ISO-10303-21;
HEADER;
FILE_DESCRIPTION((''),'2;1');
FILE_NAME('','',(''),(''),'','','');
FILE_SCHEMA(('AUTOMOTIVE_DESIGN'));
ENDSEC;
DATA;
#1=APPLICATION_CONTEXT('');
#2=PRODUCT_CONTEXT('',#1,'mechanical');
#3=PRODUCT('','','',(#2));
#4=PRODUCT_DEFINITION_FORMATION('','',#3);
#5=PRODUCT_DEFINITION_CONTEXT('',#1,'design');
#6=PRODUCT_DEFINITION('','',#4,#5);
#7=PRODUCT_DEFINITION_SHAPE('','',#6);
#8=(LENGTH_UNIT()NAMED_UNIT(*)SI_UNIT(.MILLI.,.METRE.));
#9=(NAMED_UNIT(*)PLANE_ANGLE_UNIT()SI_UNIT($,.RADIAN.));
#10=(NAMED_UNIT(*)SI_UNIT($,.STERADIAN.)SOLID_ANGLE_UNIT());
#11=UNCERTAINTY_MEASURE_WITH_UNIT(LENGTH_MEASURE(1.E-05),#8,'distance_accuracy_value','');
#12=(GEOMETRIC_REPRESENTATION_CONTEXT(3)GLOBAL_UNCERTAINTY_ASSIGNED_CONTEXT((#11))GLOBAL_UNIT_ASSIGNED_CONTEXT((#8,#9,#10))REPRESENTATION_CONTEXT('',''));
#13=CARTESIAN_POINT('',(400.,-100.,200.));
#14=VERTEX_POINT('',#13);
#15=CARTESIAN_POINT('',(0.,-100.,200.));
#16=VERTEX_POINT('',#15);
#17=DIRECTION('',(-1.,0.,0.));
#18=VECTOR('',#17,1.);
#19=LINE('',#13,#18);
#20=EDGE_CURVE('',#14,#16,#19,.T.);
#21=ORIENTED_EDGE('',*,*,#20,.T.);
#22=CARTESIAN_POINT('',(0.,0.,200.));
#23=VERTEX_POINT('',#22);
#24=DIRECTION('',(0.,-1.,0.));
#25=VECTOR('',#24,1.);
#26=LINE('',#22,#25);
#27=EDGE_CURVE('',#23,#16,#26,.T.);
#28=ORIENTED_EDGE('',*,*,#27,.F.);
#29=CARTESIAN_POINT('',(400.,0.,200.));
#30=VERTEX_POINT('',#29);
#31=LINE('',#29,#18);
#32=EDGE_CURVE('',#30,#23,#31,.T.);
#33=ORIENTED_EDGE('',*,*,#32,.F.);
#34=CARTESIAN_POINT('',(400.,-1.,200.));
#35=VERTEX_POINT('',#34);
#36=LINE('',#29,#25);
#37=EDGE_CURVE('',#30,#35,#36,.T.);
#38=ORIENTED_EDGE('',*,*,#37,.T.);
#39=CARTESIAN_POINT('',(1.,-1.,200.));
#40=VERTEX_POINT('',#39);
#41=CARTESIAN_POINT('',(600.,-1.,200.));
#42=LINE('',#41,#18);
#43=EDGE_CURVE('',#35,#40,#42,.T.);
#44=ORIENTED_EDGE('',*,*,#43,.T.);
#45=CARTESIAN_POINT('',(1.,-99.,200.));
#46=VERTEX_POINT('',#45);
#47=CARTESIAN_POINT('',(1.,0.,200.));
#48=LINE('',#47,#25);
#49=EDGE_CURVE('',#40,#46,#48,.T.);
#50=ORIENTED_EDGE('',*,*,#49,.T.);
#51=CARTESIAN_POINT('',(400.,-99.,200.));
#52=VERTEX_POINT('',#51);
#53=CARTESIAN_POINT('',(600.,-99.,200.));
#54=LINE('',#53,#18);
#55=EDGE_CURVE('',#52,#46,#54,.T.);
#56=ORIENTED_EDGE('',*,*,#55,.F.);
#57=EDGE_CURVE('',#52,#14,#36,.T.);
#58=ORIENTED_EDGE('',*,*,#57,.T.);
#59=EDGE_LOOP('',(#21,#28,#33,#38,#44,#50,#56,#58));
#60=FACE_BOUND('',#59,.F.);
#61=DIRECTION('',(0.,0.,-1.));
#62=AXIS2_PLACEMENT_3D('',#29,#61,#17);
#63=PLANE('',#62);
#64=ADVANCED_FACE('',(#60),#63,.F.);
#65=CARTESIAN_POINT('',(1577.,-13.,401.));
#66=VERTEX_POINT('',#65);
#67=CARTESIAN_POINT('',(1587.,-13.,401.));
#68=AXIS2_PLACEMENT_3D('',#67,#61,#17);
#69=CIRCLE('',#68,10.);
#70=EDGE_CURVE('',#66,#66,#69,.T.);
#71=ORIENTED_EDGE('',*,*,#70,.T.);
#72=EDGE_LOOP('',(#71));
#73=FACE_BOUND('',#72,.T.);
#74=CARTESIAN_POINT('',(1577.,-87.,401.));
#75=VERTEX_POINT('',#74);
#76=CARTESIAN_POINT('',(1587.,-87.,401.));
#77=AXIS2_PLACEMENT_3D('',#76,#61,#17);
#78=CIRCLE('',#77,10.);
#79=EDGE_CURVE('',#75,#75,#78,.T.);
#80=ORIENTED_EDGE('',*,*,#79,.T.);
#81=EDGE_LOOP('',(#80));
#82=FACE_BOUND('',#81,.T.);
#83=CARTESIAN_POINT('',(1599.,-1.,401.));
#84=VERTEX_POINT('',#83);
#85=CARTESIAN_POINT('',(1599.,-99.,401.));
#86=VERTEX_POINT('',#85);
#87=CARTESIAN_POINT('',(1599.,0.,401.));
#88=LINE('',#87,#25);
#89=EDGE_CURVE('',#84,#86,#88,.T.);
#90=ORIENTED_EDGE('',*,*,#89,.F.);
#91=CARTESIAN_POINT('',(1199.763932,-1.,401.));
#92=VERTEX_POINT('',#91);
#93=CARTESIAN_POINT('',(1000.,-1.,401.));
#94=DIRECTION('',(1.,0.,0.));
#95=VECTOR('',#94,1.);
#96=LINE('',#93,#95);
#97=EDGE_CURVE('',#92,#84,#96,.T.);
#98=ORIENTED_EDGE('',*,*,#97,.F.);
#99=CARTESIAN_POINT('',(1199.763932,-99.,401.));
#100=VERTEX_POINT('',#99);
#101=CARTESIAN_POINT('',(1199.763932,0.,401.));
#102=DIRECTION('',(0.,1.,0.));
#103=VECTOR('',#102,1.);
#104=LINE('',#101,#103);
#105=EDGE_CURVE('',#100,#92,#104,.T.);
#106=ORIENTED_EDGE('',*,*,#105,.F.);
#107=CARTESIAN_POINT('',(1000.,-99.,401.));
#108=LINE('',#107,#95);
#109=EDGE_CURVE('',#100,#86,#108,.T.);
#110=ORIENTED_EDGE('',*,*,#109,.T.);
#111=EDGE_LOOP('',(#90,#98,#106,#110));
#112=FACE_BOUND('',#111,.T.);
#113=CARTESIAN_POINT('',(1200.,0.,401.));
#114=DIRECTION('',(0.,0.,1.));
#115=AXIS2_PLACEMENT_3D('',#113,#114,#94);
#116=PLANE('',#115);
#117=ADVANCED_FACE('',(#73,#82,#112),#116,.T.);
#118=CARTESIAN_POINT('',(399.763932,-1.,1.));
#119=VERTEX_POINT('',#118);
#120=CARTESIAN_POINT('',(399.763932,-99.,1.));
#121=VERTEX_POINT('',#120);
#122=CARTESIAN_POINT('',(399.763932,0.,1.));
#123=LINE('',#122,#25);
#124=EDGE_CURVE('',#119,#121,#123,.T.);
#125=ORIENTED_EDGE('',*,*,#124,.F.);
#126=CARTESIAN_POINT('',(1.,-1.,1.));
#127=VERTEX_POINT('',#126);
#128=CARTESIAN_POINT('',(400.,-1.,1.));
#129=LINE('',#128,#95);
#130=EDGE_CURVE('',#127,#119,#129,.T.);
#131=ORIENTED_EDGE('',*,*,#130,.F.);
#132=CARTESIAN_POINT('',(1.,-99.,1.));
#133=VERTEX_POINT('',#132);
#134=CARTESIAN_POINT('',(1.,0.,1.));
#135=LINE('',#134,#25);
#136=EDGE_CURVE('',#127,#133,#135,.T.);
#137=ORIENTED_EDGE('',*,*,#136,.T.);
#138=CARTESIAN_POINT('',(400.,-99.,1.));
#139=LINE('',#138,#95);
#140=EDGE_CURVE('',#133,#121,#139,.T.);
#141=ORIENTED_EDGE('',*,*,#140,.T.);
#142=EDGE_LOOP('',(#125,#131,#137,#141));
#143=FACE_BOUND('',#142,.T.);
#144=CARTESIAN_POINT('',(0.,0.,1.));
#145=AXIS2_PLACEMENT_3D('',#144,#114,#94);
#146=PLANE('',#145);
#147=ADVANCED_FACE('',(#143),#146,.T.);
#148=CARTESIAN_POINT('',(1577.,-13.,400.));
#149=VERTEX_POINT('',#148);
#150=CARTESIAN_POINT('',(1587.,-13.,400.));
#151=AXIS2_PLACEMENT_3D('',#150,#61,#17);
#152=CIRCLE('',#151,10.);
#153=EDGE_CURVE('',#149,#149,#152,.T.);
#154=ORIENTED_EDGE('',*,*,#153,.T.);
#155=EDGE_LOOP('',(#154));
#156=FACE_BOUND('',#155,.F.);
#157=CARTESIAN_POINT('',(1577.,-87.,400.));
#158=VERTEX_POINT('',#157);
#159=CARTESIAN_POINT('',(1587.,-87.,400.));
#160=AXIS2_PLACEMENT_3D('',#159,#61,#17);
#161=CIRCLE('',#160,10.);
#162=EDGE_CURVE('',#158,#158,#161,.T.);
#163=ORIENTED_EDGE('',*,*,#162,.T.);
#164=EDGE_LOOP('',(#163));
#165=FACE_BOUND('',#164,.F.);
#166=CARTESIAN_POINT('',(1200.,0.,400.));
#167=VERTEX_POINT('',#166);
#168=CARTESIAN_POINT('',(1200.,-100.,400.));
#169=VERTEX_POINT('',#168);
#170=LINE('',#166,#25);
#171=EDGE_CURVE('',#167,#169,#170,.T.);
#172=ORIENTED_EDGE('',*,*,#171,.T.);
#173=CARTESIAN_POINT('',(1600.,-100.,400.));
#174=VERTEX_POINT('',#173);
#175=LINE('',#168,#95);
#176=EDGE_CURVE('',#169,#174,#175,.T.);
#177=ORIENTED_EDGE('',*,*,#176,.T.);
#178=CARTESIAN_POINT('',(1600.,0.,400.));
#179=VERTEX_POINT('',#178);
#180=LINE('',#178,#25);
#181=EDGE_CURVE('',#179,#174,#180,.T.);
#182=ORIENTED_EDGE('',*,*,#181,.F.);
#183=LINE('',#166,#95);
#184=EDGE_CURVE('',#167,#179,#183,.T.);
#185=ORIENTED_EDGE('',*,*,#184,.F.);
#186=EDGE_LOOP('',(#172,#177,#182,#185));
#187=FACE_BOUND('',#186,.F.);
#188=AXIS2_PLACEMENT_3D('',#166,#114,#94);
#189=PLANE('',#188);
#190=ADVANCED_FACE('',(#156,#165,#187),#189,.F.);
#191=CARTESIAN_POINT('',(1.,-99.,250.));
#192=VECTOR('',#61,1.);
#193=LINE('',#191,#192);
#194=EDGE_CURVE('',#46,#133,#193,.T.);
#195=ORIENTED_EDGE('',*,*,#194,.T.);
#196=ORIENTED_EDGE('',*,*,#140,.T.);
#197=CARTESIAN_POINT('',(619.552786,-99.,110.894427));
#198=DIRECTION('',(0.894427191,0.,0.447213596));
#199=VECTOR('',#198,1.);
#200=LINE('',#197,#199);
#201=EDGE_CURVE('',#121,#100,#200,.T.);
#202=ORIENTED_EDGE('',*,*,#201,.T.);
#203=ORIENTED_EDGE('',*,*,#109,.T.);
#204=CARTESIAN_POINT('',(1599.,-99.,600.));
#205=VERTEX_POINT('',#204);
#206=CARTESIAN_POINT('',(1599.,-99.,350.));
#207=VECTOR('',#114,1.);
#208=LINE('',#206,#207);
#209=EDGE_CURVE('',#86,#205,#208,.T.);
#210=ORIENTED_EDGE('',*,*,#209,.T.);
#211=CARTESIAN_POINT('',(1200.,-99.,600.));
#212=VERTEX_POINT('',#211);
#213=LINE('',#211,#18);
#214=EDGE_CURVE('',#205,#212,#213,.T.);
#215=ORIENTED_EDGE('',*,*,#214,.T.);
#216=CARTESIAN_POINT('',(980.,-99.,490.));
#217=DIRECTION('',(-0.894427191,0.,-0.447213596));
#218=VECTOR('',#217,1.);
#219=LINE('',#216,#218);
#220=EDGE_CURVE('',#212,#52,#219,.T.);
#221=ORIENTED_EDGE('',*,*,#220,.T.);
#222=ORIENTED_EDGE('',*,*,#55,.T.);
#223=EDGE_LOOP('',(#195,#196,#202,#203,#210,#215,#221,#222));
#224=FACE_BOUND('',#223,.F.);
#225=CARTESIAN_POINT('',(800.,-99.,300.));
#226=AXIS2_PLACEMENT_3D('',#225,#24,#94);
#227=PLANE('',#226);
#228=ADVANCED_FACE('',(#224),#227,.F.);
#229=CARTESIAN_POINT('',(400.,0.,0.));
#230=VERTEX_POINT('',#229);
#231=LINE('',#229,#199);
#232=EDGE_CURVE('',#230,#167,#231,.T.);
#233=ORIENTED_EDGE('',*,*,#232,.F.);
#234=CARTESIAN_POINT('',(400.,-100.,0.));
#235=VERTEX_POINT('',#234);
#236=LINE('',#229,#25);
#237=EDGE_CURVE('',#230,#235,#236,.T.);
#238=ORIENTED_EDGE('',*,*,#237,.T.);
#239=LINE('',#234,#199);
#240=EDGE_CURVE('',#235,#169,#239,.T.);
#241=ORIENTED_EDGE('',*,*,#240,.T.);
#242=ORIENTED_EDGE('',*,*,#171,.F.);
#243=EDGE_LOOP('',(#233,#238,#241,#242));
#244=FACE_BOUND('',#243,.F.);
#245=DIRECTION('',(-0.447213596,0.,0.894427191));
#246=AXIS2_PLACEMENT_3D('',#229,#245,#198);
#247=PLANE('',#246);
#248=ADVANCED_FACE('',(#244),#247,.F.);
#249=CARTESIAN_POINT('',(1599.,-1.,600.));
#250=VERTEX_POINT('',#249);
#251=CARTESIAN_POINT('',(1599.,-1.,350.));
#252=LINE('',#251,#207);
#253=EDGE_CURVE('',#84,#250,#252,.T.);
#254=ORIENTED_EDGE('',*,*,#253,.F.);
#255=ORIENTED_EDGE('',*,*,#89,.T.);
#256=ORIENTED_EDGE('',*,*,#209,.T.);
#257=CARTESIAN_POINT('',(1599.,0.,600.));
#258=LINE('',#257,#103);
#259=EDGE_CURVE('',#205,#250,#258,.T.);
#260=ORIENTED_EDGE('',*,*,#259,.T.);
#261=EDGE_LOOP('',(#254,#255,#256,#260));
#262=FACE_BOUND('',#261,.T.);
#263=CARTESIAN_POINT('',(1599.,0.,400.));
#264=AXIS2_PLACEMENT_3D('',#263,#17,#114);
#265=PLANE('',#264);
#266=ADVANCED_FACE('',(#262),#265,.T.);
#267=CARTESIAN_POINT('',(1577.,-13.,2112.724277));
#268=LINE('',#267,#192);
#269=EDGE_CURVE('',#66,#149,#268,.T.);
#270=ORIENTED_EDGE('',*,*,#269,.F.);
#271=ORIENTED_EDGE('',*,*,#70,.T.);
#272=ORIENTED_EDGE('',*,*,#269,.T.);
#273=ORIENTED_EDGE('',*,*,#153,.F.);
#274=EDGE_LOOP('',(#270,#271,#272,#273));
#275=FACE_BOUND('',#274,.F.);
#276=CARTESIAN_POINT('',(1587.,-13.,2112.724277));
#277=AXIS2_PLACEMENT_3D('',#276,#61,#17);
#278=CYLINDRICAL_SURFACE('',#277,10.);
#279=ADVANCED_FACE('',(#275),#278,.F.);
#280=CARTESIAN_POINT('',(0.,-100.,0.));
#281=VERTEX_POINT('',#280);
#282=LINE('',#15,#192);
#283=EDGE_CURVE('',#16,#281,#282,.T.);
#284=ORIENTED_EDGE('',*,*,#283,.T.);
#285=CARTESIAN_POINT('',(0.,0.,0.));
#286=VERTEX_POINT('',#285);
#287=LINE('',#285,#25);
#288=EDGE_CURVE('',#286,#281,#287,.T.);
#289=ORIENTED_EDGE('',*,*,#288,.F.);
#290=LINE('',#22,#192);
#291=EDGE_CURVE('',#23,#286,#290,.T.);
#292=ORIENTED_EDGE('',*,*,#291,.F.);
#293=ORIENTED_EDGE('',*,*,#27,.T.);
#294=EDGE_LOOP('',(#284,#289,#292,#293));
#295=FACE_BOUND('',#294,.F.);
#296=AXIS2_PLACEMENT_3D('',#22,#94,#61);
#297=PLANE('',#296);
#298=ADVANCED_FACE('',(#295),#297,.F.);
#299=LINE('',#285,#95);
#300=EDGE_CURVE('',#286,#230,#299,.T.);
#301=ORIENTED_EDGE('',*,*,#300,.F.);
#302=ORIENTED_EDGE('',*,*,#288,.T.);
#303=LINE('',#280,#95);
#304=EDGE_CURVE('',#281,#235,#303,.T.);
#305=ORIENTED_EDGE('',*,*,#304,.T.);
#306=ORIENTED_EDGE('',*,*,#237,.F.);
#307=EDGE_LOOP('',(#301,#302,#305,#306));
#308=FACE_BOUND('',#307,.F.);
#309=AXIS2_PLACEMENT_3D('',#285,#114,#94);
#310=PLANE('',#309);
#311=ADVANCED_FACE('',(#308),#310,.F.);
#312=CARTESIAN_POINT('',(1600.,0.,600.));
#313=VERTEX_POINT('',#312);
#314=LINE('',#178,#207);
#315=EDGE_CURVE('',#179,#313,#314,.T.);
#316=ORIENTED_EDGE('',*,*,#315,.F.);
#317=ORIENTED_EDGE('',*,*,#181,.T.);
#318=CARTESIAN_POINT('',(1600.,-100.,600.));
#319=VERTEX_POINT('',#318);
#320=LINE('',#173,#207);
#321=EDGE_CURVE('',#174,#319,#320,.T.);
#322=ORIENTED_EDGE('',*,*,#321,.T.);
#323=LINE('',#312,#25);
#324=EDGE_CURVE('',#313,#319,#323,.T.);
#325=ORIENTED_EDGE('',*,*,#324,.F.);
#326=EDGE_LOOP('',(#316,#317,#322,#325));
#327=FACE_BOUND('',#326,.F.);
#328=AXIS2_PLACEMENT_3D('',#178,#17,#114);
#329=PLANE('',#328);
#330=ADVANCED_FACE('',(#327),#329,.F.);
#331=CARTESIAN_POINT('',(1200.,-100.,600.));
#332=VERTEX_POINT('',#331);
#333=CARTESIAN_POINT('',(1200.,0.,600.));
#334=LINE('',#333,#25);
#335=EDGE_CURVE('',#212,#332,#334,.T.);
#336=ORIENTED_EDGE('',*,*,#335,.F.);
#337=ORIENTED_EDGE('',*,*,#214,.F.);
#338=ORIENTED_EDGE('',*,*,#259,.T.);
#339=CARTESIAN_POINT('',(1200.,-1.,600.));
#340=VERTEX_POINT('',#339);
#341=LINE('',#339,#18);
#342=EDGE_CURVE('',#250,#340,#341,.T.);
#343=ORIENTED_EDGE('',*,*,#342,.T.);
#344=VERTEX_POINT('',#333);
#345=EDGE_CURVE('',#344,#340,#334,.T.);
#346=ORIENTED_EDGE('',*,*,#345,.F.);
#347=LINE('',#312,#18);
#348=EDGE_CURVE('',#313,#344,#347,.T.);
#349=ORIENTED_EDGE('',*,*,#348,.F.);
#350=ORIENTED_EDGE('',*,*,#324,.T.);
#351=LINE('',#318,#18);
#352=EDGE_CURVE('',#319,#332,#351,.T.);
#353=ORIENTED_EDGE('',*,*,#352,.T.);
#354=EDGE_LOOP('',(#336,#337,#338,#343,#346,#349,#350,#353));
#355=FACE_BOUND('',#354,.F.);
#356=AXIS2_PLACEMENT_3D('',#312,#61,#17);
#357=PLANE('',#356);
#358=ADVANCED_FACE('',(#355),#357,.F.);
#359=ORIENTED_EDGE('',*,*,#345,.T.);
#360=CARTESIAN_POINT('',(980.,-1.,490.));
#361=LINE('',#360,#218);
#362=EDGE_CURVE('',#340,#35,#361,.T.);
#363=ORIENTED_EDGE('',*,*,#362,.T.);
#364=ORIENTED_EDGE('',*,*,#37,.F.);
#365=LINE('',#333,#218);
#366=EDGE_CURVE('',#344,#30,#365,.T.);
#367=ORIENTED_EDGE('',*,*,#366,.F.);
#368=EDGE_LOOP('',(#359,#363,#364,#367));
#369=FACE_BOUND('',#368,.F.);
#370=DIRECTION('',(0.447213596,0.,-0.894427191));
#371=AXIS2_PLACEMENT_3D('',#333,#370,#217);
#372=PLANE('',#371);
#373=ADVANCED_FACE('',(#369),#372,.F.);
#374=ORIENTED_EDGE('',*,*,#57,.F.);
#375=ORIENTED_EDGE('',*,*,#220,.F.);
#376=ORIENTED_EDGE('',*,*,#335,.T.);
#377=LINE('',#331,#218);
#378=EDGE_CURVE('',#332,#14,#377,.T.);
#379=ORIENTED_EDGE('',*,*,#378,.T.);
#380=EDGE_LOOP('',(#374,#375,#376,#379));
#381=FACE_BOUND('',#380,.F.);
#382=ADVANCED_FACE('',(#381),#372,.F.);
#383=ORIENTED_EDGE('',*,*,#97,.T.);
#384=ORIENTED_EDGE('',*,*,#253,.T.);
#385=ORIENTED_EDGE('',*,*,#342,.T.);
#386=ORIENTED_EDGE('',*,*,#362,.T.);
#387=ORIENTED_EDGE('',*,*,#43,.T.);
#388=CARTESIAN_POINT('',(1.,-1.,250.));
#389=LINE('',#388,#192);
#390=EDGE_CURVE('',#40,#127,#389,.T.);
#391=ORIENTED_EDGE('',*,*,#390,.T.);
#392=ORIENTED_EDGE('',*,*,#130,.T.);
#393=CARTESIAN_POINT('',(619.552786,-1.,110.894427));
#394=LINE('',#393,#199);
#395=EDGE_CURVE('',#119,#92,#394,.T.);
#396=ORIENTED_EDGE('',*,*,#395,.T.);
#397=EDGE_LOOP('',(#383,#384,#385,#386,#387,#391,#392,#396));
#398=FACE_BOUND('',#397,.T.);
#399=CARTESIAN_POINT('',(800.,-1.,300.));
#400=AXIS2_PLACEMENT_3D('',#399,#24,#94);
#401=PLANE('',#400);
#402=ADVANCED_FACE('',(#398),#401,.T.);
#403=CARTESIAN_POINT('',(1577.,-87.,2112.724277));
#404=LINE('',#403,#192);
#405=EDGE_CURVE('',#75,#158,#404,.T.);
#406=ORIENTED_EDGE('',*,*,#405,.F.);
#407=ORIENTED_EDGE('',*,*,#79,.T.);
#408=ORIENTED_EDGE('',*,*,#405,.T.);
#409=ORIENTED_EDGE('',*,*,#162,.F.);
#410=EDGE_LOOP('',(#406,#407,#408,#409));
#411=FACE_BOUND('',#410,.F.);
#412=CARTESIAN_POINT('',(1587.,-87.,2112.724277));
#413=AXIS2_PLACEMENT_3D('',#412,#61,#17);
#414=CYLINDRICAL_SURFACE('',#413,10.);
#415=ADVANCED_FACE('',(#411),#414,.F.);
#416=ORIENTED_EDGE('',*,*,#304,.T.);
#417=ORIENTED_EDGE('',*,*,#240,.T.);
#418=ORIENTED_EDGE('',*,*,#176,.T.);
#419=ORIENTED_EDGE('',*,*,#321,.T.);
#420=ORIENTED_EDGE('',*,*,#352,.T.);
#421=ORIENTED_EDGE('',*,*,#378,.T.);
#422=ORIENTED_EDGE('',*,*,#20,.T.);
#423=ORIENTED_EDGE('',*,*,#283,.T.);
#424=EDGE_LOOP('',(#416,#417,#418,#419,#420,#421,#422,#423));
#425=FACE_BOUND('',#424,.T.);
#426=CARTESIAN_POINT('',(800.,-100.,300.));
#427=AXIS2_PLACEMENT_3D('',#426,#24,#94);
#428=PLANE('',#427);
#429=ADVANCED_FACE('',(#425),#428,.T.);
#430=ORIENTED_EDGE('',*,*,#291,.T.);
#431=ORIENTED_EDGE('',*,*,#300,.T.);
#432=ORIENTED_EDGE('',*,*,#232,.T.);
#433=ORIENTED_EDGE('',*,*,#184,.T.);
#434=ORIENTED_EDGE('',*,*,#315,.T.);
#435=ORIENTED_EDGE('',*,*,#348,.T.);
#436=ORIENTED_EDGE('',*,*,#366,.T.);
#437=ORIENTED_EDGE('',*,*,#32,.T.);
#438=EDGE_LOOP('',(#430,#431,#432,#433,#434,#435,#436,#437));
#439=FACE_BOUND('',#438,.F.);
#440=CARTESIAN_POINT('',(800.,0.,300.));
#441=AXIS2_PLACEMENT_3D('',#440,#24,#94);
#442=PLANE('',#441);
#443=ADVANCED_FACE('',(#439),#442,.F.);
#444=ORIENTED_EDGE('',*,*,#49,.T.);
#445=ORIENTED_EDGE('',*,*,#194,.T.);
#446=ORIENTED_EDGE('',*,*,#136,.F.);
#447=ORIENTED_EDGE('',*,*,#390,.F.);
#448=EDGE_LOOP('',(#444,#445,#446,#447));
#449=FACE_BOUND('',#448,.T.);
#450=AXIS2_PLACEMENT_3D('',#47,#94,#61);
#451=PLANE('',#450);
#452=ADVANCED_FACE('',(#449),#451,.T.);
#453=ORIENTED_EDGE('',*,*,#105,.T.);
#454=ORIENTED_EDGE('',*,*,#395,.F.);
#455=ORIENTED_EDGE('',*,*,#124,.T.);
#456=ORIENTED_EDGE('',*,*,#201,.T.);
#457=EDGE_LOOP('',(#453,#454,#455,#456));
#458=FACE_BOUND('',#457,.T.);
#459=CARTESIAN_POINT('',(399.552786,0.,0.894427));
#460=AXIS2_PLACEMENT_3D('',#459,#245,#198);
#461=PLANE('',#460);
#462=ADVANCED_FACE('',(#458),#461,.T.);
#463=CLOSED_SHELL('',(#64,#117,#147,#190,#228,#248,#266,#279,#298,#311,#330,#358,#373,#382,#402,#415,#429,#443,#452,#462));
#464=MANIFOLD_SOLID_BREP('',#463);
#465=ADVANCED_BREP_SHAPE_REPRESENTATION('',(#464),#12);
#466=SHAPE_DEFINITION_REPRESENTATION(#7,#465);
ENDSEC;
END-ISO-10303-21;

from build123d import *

# Parameters (mm, degrees)
F1_DEPTH = 100
F2_T     = -1
F5_D     = 20


# Not quite as in the source:
# - the program builds the solid bodies; features that only make, move or delete a surface that nothing else refers to are left out


with BuildPart() as f1:
    # F0 (on Front) → F1 (new body)
    with BuildSketch(Plane.XZ):
        Polygon((0, 200), (0, 0), (400, 0), (1200, 400), (1600, 400), (1600, 600), (1200, 600), (400, 200), align=None)
    extrude(amount=F1_DEPTH)

    # F2
    f2_openings = [f1.faces().sort_by_distance(p)[0] for p in [
        (200, -50, 200),
        (800, -50, 400),
        (1400, -50, 600),
    ]]
    offset(amount=F2_T, openings=f2_openings, kind=Kind.INTERSECTION)

    # F5 (through all)
    with Locations(Plane.XY.offset(401)):
        with Locations((1587, -13), (1587, -87)):
            Hole(F5_D / 2)


solid = f1.part
